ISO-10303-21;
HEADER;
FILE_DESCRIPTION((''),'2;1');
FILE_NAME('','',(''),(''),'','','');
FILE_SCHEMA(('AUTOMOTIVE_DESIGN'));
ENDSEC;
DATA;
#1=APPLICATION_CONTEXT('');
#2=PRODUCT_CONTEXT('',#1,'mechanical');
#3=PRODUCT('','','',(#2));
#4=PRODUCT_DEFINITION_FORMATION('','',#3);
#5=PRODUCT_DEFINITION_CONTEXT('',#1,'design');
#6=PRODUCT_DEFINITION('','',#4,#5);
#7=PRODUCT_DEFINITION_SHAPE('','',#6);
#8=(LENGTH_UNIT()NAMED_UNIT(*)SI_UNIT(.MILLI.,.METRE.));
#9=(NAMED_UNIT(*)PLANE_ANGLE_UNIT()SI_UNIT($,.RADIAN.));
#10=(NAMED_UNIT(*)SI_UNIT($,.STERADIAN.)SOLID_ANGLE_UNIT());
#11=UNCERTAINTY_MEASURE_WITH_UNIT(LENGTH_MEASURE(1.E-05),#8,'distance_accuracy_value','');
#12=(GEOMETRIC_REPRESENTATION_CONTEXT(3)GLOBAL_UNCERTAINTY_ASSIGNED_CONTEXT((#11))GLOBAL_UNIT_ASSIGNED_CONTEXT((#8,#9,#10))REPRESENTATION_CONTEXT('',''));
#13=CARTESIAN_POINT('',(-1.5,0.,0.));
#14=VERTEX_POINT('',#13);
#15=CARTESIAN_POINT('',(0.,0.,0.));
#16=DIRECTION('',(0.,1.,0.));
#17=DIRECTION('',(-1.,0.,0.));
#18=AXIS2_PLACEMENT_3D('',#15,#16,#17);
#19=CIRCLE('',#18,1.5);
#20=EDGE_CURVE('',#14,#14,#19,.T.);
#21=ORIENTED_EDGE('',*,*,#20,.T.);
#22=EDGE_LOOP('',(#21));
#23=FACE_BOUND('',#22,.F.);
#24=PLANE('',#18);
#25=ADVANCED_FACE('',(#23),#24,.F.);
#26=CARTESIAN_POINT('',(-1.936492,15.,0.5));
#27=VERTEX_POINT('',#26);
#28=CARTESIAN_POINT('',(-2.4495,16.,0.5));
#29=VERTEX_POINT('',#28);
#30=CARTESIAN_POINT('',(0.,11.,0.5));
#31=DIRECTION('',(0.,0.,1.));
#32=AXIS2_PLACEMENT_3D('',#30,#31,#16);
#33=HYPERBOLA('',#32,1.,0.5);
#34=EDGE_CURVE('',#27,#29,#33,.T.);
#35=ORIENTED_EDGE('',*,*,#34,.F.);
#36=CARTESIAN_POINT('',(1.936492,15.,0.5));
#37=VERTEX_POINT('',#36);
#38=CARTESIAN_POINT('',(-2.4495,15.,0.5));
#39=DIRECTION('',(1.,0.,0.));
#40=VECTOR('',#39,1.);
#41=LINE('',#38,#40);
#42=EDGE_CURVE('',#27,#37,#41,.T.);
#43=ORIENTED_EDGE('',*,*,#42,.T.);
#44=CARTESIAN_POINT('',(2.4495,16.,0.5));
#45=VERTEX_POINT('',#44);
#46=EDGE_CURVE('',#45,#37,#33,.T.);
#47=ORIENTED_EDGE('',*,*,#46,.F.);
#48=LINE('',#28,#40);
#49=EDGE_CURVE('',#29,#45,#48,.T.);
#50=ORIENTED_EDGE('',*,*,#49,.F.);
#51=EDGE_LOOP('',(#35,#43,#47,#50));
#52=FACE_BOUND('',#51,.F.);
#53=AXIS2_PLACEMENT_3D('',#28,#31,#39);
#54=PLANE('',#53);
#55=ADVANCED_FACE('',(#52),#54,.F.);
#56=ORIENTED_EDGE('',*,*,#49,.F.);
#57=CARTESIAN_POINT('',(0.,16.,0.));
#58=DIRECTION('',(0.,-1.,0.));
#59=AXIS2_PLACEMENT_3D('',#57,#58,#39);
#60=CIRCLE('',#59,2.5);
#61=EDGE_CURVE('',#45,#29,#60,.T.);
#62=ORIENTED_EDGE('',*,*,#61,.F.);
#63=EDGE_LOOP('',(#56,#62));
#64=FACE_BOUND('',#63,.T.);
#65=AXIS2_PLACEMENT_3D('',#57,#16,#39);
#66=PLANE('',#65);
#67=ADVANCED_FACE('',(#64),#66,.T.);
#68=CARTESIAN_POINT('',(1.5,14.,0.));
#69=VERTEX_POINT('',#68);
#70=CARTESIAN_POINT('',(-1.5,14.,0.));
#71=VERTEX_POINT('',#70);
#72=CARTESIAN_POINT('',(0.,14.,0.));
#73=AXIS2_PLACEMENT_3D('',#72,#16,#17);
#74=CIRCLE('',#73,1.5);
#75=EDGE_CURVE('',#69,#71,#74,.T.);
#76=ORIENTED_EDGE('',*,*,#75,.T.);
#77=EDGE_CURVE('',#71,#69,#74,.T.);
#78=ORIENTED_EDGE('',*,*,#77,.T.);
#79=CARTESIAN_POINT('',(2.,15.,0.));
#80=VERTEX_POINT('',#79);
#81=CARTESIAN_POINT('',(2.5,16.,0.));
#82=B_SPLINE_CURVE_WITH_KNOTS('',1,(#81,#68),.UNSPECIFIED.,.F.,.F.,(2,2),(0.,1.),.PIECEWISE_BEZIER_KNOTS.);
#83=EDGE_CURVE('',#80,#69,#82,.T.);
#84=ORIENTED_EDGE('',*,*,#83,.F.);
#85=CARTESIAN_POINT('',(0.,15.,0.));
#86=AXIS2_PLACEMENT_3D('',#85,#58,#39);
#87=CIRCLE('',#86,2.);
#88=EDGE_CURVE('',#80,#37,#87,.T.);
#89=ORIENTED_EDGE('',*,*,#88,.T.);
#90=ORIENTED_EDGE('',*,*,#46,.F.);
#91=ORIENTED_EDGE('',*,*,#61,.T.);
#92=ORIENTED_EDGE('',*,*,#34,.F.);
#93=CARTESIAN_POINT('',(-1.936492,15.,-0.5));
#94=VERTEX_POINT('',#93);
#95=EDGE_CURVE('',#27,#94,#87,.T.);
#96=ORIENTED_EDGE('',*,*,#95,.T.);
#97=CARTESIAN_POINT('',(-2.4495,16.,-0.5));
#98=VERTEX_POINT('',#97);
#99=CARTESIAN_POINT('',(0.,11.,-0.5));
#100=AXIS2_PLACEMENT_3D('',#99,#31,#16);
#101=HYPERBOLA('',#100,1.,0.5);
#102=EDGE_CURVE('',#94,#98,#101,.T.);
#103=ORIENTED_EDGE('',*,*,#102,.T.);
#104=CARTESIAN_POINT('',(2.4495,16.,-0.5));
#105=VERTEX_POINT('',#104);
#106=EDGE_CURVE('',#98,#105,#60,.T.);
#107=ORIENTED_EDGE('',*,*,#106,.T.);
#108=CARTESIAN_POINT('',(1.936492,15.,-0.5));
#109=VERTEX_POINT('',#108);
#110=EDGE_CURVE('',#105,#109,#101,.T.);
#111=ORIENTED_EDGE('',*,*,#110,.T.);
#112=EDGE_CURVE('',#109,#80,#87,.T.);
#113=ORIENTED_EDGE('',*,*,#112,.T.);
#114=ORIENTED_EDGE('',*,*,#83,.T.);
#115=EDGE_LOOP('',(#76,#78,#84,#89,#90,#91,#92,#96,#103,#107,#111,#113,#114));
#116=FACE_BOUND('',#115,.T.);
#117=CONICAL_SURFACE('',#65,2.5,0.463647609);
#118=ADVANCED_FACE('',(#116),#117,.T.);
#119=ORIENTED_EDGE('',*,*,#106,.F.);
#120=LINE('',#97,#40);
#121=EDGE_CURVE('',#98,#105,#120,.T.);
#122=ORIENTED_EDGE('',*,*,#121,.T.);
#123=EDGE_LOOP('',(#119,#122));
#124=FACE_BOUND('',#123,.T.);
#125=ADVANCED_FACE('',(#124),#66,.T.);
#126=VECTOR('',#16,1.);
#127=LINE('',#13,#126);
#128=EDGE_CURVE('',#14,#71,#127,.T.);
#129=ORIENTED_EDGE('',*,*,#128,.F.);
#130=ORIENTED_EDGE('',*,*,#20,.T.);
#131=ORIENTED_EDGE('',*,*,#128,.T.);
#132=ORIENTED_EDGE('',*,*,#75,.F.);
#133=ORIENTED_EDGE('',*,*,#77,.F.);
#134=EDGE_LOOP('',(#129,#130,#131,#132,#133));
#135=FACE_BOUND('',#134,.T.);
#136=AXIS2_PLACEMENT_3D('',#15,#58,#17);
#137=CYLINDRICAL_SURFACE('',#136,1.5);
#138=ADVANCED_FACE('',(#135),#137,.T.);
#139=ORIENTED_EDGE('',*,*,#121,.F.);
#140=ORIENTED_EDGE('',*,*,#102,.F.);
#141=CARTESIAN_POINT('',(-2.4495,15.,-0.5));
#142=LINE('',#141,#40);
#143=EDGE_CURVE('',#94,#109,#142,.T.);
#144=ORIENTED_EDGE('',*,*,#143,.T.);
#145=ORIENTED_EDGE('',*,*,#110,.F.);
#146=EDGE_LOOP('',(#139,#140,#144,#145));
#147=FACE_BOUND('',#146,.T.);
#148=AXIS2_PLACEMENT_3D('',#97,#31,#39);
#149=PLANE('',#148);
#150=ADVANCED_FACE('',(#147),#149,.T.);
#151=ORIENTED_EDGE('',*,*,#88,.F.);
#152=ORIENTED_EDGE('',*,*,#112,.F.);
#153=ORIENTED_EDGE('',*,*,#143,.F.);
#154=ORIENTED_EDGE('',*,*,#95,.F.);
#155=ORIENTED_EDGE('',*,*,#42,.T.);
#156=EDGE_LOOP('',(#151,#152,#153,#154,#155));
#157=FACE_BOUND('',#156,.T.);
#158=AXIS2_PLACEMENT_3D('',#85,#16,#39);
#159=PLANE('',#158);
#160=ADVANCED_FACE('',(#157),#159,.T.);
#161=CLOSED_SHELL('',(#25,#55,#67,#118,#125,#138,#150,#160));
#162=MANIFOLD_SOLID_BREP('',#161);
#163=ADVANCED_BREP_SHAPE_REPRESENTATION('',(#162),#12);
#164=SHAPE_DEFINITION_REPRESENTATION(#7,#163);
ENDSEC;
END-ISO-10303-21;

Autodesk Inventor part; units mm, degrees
ref_plane "YZ Plane" through (0, 0, 0) normal (1, 0, 0) x (0, 1, 0)
ref_plane "XZ Plane" through (0, 0, 0) normal (0, 1, 0) x (-1, 0, 0)
sketch "Sketch1" plane through (0, 0, 0) normal (0, 1, 0) x (-1, 0, 0)
  circle A0 centre (0, 0) radius 1.5
  dimension "d0" = 3
extrude "Extrusion1" add sketch "Sketch1" along normal blind 14
thread "Thread1" size "M3x0.5" class "6g" standard "ANSI Metric M Profile" full length
ref_plane "Work Plane1" through (0, 16, 0) normal (0, 1, 0) x (1, 0, 0)
sketch "Sketch4" plane through (0, 16, 0) normal (0, 1, 0) x (1, 0, 0)
  circle A0 centre (0, 0) radius 2.5
  dimension "d14" = 5
loft "Loft1" add profiles "Sketch4" section 2 edges at (1.5, 14, 0)
sketch "Sketch5" plane through (0, 16, 0) normal (0, 1, 0) x (1, 0, 0)
  circle A0 centre (0, 0) radius 2.5 projected
  line L0 (-2.4495, 0.5) -> (2.4495, 0.5)
  line L1 (-2.4495, -0.5) -> (2.4495, -0.5)
  line L2 (0, 0) -> (2.0973, 0) construction
  dimension "d19" = 1
extrude "Extrusion4" cut sketch "Sketch5" against normal blind 1 contours A0 L1 L0
properties part number "Screw_CountersunkHead_3x16" material "Steel, Galvanized"
